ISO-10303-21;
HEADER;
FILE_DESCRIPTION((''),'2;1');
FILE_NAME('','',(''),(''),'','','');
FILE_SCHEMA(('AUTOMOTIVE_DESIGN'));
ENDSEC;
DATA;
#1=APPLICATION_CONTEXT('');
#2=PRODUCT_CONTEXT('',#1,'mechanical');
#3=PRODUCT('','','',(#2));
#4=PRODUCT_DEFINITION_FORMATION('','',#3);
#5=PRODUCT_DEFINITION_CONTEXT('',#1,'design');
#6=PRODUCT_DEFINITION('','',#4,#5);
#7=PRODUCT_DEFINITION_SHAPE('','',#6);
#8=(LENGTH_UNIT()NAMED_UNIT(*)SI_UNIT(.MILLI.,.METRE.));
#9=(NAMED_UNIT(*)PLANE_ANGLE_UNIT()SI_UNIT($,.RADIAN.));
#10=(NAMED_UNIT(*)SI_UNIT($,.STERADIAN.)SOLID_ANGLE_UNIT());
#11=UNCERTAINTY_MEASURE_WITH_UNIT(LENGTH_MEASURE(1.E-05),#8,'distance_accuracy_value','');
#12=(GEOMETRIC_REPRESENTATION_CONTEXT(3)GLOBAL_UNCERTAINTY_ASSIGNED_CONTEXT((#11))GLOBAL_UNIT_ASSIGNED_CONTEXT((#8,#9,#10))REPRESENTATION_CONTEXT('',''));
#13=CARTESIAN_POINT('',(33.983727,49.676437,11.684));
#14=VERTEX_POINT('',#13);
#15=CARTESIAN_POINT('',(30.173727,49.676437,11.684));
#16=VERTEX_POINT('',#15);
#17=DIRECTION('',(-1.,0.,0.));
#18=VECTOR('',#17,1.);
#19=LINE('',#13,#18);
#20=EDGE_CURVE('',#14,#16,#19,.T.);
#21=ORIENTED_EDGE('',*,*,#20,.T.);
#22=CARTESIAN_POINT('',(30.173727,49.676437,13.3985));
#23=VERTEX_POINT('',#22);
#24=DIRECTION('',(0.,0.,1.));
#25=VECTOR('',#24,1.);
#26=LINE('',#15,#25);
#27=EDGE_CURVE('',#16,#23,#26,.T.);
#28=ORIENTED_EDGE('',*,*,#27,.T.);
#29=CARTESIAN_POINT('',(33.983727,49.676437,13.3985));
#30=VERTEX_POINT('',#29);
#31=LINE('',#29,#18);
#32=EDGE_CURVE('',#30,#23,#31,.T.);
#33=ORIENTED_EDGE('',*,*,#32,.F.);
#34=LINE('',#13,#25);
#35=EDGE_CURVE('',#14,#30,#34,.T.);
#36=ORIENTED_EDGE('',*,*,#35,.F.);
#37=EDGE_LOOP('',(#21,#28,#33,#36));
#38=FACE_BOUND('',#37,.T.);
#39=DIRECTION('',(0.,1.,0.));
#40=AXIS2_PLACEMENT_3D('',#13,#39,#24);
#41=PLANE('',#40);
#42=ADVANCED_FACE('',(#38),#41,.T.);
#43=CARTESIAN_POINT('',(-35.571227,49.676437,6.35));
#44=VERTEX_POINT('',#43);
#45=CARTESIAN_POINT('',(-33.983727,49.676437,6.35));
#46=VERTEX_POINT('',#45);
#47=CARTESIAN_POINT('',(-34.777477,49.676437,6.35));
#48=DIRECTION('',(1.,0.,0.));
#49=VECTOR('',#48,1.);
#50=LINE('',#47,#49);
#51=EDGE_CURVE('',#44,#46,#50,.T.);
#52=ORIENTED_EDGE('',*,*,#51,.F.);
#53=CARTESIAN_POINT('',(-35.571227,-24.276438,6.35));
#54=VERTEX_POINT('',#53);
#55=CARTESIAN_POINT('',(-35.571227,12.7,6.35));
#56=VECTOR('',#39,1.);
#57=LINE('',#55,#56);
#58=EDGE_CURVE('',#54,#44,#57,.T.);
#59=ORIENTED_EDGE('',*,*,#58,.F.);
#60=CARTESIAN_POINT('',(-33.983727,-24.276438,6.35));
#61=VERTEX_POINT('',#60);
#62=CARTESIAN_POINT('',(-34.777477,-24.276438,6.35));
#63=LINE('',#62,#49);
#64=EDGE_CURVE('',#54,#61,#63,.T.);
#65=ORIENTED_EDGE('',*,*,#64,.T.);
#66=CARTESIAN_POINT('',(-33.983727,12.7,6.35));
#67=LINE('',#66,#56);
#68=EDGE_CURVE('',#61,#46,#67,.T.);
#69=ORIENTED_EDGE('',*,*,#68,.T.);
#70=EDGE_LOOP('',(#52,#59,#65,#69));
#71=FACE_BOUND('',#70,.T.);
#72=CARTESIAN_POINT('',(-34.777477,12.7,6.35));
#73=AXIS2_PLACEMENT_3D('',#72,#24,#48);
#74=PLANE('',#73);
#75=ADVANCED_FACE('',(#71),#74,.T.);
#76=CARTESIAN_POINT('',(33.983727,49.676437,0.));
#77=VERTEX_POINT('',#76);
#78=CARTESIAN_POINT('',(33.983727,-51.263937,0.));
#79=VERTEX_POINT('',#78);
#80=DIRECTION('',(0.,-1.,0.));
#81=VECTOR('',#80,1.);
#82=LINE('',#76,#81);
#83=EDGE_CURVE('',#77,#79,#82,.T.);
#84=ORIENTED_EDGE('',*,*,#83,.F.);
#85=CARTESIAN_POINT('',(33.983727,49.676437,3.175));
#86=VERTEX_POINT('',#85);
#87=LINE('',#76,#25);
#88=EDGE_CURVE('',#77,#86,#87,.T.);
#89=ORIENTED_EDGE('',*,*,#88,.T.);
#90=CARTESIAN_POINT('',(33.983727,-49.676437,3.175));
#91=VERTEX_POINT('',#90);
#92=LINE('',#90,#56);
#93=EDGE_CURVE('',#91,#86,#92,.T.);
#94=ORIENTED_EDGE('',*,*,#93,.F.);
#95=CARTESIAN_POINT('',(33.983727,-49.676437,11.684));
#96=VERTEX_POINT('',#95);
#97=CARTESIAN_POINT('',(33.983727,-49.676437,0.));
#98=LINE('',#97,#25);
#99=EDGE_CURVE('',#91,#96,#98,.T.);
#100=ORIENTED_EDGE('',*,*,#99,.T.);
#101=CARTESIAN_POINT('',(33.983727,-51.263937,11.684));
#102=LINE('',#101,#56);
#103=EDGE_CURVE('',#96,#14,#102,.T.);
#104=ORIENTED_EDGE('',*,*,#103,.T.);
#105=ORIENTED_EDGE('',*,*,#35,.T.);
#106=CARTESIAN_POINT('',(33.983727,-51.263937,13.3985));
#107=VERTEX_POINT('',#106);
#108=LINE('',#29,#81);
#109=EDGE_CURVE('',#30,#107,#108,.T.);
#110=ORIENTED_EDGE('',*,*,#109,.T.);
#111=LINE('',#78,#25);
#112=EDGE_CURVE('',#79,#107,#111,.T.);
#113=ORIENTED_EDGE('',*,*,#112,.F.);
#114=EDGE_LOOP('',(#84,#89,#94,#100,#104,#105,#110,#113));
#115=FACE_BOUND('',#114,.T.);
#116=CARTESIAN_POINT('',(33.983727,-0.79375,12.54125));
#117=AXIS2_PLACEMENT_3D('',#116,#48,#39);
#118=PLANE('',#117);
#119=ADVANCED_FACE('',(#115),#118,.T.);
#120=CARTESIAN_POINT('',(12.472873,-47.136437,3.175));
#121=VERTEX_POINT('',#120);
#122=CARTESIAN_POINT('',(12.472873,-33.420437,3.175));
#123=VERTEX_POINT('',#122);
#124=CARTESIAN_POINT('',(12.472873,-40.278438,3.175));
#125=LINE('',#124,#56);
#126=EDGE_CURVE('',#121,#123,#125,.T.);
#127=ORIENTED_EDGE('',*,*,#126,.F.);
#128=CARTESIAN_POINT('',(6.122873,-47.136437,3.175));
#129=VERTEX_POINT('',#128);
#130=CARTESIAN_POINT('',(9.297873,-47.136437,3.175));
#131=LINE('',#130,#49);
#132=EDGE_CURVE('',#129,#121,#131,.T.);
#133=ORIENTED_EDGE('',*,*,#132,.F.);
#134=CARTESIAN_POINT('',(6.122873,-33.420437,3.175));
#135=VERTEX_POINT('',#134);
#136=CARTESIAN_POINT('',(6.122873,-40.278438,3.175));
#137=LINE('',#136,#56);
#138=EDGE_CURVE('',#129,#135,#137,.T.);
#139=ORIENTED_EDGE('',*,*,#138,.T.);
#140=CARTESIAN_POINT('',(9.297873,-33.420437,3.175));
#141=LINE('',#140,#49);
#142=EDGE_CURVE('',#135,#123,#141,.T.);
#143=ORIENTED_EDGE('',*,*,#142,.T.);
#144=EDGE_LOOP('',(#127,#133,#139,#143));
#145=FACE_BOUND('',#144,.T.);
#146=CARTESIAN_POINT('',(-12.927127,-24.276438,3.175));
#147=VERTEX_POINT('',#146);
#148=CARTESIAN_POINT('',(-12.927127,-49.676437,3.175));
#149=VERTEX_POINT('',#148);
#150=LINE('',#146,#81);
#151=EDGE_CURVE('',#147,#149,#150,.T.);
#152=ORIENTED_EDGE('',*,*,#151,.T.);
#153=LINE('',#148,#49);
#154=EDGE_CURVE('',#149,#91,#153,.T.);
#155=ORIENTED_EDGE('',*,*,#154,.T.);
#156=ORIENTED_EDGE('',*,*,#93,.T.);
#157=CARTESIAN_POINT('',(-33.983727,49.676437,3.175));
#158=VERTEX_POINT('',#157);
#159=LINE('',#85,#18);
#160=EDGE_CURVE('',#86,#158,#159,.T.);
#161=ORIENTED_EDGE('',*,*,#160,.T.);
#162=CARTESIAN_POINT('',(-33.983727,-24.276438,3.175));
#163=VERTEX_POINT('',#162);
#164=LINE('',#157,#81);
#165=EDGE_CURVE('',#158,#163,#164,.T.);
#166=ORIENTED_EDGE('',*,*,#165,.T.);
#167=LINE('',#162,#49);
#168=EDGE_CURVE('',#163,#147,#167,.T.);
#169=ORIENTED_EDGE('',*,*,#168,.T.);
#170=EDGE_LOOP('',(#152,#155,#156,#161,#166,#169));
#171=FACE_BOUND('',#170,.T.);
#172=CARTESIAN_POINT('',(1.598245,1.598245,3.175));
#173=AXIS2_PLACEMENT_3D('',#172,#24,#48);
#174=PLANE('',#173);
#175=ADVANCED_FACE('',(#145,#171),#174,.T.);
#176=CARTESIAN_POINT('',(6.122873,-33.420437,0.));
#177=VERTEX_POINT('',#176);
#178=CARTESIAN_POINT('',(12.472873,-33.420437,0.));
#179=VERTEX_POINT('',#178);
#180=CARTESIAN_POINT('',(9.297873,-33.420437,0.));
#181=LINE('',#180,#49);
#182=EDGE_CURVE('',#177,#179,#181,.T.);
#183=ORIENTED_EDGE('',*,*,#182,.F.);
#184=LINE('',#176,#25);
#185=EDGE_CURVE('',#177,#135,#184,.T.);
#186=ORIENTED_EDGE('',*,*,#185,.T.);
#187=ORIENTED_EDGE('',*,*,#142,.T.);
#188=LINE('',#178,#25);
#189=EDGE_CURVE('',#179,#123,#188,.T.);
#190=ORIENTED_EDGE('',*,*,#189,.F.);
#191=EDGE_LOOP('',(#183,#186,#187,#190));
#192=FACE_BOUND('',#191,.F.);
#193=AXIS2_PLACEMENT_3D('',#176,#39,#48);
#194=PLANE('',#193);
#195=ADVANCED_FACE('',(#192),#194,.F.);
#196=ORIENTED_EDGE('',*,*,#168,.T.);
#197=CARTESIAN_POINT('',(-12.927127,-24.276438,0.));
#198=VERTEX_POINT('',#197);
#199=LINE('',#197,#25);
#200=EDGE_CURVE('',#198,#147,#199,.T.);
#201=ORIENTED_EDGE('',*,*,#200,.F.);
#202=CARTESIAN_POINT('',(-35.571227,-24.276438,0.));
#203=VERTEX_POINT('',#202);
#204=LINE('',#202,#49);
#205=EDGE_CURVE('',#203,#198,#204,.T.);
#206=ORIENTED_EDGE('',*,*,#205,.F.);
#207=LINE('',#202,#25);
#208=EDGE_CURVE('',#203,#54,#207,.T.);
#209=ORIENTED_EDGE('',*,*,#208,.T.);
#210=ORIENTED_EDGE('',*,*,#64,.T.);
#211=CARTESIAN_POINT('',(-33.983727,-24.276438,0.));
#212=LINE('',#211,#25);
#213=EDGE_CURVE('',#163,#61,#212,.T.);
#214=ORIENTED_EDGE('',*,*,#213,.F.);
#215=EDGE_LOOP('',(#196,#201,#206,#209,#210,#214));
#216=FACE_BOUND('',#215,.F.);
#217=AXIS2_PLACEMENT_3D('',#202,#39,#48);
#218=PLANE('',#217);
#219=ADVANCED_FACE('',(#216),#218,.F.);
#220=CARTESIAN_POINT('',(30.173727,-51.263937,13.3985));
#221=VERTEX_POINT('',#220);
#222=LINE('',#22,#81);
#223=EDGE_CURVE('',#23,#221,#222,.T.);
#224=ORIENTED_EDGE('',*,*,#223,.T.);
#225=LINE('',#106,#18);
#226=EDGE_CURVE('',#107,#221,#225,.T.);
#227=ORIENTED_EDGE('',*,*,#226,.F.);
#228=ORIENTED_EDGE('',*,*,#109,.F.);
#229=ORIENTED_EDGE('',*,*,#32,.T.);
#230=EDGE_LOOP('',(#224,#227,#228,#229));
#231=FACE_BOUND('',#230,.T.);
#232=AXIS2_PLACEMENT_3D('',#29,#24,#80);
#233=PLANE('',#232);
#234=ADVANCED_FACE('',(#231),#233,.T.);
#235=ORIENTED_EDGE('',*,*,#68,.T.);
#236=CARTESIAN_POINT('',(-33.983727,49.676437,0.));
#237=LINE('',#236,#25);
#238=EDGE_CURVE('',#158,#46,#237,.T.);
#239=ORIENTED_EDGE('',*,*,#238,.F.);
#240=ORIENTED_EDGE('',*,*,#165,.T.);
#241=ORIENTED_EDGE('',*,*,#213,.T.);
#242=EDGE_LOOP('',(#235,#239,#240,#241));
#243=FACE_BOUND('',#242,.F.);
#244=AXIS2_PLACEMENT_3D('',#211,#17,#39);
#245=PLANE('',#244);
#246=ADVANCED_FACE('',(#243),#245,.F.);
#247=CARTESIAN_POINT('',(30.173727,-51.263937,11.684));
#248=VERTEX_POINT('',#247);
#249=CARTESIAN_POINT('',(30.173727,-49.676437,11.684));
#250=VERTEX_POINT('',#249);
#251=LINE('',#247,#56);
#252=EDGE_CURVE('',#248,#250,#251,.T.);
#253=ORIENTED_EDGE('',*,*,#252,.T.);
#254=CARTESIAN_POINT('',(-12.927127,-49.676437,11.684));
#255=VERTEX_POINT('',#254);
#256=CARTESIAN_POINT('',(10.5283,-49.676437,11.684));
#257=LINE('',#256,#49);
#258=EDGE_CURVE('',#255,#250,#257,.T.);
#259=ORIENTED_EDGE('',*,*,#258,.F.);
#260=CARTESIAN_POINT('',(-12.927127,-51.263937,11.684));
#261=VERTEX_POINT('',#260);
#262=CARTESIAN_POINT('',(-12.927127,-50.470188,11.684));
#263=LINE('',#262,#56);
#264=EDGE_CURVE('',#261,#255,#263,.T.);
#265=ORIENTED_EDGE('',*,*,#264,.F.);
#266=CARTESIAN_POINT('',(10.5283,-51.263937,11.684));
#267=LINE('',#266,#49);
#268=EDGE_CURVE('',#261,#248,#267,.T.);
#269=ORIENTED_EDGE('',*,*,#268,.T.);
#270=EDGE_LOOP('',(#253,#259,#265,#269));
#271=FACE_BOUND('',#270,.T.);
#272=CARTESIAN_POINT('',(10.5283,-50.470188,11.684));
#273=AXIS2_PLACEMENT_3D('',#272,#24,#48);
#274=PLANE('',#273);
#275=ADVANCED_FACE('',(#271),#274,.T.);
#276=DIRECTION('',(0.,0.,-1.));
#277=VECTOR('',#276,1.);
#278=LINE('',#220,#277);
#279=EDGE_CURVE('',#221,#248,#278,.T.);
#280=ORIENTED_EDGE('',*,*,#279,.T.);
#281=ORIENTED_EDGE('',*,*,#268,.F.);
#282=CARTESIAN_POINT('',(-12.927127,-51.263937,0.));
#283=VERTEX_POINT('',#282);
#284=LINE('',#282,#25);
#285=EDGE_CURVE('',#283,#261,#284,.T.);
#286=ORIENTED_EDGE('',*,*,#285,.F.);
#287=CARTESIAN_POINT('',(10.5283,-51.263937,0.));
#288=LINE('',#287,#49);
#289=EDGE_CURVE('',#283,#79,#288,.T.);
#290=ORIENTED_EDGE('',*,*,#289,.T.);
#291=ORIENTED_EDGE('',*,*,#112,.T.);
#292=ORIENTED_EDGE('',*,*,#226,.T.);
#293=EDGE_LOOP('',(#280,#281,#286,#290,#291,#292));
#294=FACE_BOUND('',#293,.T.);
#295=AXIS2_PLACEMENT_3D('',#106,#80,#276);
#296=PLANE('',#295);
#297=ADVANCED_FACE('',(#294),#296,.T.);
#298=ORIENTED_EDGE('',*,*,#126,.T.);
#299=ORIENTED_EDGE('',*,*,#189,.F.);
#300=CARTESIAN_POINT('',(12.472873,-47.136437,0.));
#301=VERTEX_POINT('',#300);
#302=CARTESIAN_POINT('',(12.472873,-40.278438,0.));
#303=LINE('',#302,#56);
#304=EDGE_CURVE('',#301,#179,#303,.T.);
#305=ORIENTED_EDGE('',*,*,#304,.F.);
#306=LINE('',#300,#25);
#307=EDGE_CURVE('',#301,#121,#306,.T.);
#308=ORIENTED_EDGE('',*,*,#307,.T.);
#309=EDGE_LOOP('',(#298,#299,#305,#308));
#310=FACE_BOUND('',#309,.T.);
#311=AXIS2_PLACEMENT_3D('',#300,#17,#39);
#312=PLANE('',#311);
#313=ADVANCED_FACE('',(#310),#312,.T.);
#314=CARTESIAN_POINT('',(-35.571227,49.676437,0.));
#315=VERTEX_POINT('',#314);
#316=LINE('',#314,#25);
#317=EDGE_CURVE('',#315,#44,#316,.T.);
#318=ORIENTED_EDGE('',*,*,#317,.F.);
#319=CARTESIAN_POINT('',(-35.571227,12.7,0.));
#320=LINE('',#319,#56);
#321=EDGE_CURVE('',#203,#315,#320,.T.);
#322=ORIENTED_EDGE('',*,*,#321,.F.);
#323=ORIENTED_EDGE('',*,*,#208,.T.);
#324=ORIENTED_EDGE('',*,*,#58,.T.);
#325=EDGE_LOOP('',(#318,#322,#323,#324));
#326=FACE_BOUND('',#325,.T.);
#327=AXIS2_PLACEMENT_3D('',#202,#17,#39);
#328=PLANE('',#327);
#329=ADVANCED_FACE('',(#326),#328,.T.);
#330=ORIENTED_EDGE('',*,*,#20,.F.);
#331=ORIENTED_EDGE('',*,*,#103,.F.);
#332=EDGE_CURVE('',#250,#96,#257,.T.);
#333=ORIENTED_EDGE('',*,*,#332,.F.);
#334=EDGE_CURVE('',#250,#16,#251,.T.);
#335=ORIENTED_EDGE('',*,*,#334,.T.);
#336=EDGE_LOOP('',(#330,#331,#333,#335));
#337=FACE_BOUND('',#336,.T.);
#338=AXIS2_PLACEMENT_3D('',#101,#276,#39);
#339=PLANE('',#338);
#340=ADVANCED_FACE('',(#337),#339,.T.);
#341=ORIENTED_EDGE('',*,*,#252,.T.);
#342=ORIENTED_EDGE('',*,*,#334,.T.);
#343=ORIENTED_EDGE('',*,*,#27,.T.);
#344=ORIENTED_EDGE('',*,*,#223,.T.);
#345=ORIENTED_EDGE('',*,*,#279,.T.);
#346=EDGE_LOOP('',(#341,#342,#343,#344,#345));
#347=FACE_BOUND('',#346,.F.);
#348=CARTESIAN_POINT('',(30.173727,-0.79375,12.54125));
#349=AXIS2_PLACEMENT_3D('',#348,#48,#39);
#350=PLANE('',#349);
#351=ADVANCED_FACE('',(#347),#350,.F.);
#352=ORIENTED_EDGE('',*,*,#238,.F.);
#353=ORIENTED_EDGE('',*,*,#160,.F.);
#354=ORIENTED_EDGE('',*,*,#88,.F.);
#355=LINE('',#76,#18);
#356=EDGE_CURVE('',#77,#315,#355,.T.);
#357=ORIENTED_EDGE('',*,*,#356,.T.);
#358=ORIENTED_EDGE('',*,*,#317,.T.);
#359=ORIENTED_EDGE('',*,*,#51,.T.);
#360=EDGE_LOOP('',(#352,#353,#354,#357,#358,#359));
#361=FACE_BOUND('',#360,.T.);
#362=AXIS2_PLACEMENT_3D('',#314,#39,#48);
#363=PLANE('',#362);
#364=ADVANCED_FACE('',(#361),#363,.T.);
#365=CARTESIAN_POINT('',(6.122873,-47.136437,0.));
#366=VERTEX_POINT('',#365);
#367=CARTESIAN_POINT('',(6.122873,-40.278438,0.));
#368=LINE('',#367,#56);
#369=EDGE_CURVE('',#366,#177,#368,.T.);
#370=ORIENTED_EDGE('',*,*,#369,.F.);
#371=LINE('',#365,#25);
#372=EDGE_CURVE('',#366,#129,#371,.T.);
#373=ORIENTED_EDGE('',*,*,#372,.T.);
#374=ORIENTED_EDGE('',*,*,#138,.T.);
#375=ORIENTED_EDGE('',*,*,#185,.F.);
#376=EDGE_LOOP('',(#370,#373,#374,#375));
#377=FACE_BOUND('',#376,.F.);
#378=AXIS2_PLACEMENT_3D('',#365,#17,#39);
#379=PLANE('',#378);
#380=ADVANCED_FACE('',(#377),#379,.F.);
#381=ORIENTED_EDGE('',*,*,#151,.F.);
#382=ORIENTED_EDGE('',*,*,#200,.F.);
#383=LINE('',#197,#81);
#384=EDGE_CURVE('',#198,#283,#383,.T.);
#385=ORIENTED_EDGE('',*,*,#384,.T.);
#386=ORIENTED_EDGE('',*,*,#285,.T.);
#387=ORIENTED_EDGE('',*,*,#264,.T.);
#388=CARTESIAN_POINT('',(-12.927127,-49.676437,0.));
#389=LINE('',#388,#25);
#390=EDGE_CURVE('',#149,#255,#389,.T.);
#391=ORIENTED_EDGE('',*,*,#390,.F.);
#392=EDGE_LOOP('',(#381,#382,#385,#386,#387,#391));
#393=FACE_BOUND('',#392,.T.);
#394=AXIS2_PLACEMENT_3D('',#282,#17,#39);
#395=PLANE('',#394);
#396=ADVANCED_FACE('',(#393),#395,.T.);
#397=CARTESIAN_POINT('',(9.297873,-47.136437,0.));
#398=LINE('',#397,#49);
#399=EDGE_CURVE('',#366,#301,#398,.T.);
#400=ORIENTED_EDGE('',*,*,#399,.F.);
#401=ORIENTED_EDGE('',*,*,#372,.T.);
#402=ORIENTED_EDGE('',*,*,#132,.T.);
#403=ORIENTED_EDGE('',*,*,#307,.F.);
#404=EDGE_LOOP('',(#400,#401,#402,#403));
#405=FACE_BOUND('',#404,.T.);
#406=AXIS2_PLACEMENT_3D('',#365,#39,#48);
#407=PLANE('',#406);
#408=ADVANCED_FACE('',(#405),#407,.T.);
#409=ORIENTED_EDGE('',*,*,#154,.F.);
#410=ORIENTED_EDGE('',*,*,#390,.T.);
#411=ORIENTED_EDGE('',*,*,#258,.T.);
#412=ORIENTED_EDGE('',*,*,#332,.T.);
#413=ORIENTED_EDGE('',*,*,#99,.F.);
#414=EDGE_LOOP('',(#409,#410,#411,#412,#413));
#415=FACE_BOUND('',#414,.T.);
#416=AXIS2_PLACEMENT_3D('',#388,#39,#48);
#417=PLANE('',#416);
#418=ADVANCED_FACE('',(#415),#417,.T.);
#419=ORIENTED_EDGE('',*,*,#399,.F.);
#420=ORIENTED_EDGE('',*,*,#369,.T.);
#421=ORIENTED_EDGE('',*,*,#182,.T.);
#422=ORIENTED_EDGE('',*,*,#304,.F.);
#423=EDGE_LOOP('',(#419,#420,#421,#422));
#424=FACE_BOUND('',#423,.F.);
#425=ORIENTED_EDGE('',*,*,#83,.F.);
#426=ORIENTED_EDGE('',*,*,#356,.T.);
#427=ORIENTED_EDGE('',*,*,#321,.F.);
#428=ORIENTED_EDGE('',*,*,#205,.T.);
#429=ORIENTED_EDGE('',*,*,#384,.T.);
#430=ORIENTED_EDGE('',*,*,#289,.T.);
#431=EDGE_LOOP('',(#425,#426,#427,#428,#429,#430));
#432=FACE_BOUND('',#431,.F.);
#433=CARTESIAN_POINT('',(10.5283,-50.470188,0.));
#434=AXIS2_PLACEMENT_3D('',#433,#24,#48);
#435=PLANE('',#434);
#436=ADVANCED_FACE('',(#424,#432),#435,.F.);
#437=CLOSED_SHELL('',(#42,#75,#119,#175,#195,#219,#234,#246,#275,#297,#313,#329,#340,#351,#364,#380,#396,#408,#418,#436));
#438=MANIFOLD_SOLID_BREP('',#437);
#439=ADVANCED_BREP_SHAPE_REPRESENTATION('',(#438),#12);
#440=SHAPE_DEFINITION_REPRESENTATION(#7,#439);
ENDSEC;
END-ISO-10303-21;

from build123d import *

# Parameters (mm, degrees)
F0_W     = 6.35
F0_H     = 13.716
F1_DEPTH = 3.175
F0_W_2   = 1.5875
F0_H_2   = 73.952875
F2_DEPTH = 6.35
F0_W_3   = 46.9108536
F0_H_3   = 1.5875
F3_DEPTH = 11.684
F6_DEPTH = 3.81


# Not quite as in the source:
# - a feature names something its author has since deleted; it is built from what else it names


with BuildPart() as f1:
    # F0 (on Top) → F1 (new body)
    with BuildSketch(Plane.XY):
        Polygon((33.9837268, -49.6764375), (33.9837268, 49.6764375), (-33.9837268, 49.6764375), (-33.9837268, -24.2764375), (-12.9271268, -24.2764375), (-12.9271268, -49.6764375), align=None)
        with Locations((9.2978732, -40.2784375)):
            Rectangle(F0_W, F0_H, mode=Mode.SUBTRACT)
    extrude(amount=F1_DEPTH)

    # F0 (on Top) → F2 (join)
    with BuildSketch(Plane.XY):
        with Locations((-34.7774768, 12.7)):
            Rectangle(F0_W_2, F0_H_2)
    extrude(amount=F2_DEPTH)

    # F0 (on Top) → F3 (join)
    with BuildSketch(Plane.XY):
        with Locations((10.5283, -50.4701875)):
            Rectangle(F0_W_3, F0_H_3)
    extrude(amount=F3_DEPTH)

    # F5 (on face) → F6 (join)
    with BuildSketch(Plane.YZ.offset(33.9837268)):
        Polygon((-51.2639375, 13.3985), (-51.2639375, 11.684), (-49.6764375, 11.684), (49.6764375, 11.684), (49.6764375, 13.3985), align=None)
    extrude(amount=-F6_DEPTH)


solid = f1.part
